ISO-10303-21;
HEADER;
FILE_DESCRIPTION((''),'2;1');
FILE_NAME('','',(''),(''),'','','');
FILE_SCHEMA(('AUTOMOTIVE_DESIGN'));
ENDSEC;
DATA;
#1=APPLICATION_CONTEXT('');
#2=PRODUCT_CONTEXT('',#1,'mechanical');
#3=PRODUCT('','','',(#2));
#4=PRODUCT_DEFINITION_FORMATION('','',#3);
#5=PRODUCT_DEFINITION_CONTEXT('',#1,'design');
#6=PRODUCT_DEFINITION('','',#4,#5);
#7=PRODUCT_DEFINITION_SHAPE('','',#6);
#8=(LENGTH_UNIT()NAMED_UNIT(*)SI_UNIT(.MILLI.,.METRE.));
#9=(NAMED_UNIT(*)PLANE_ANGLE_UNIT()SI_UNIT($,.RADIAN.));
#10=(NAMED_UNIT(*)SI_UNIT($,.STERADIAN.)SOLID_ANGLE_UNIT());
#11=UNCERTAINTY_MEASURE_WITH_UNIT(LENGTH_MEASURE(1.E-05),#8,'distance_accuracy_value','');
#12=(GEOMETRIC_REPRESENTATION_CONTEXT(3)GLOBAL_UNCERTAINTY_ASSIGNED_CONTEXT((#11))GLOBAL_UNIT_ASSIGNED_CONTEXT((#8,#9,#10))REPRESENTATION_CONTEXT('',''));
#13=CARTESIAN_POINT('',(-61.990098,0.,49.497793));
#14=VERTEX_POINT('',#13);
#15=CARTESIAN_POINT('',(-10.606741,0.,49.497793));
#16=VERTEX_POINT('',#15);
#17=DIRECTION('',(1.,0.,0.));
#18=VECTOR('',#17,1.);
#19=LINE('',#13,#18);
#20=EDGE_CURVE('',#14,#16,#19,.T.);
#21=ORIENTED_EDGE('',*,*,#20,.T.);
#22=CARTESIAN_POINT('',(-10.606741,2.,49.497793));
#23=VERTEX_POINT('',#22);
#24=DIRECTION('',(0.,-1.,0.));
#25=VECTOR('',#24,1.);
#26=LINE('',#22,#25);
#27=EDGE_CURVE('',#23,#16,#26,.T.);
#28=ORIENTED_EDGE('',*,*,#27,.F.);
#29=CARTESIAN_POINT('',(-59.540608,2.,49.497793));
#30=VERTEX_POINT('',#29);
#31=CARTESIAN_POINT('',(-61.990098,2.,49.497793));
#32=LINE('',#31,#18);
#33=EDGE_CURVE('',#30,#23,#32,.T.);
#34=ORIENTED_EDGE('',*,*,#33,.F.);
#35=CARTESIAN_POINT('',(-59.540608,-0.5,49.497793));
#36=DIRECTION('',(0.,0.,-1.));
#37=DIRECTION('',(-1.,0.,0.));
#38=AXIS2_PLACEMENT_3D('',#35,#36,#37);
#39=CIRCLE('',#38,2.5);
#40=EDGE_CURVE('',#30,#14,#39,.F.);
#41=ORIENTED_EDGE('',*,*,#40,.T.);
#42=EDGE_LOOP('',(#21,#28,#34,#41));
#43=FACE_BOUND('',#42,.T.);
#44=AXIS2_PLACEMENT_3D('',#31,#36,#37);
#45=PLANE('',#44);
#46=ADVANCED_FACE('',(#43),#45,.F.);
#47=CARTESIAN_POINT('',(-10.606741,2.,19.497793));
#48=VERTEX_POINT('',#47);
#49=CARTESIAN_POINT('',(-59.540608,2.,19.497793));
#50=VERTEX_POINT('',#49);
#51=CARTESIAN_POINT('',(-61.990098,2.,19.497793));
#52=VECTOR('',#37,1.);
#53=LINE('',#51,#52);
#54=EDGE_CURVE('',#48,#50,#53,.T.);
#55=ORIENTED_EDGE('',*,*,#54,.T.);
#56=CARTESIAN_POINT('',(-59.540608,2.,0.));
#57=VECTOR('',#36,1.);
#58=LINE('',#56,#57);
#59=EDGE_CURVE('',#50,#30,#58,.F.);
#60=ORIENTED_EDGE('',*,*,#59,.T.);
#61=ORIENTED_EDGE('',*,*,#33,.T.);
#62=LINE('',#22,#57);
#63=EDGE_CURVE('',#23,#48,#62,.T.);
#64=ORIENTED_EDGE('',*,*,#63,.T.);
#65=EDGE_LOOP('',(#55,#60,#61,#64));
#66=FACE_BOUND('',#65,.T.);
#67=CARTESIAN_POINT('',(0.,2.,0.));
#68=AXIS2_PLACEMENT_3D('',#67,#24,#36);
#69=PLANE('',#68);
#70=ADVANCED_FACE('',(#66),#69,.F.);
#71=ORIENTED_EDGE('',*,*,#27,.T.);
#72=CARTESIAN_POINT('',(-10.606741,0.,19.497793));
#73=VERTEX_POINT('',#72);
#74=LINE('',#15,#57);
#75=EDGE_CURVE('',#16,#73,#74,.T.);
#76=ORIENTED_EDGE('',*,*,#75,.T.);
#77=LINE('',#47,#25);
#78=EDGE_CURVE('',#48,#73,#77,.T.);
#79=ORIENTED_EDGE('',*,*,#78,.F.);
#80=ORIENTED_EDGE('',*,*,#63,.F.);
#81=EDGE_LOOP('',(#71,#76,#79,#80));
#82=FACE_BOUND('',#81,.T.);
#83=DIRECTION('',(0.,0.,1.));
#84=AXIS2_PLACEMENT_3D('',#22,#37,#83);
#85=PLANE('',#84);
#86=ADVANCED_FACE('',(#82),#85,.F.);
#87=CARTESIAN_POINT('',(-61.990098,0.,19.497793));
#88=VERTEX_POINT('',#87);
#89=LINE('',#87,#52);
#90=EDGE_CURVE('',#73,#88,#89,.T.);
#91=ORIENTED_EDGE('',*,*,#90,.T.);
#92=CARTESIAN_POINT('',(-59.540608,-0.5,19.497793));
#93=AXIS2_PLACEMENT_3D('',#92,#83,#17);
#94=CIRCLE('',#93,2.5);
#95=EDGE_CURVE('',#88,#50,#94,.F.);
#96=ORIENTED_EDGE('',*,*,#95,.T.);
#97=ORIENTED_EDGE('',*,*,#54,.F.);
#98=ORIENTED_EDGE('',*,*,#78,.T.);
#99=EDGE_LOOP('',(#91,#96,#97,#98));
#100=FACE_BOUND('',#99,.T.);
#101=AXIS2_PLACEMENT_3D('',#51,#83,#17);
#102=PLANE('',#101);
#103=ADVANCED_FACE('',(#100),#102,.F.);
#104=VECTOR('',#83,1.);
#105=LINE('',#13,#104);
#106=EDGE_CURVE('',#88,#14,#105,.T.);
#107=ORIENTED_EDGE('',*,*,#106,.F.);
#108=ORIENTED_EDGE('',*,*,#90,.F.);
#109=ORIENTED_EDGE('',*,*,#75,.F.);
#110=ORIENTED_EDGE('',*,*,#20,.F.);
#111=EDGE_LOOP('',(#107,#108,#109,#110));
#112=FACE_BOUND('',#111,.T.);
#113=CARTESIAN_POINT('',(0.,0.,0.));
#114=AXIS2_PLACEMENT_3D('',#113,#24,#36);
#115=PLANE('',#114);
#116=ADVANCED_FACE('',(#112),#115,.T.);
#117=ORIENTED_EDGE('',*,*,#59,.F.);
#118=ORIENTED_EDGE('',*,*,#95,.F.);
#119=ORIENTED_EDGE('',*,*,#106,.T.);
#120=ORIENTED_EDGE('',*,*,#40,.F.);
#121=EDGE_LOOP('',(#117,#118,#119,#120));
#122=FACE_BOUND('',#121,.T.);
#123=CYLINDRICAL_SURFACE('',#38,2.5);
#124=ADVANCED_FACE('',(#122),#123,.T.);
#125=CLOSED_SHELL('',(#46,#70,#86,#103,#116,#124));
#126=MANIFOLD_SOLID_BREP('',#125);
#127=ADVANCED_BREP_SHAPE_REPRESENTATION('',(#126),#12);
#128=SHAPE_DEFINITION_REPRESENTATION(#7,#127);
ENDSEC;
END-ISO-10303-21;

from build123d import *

# Parameters (mm, degrees)
SKETCH_1_W      = 51.383356777
SKETCH_1_H      = 30
EXTRUDE_1_DEPTH = 2
FILLET_1_R      = 2.5


with BuildPart() as part:
    # Эскиз1 → Бобышка-Вытянуть1 (new body)
    with BuildSketch(Plane(origin=(0, 0, 0), x_dir=(1, 0, 0), z_dir=(0, 1, 0))):
        with Locations((-36.298419233, -34.497792834)):
            Rectangle(SKETCH_1_W, SKETCH_1_H)
    extrude(amount=EXTRUDE_1_DEPTH)

    # Скругление1
    # the kernel refuses this fillet: 2.5 mm, written as the material it takes off along each edge
    with BuildSketch(Plane(origin=(-61.990097621, 2, 13.374068477), x_dir=(1.5667467323505199e-12, -1.0, 0), z_dir=(0, 0, 1))) as fillet_1_piece_1:
        with BuildLine():
            CenterArc((2.5, 2.449489743), FILLET_1_R, 180, 78.463040967)
            Line((0, 2.449489743), (-0.05, 2.449489743))
            Line((-0.05, 2.449489743), (-0.05, 0))
            Line((-0.05, 0), (0, -0.05))
            ThreePointArc((0, -0.05), (1, -0.05), (1.99, -0.048989795))
            Line((1.99, -0.048989795), (2, 0))
        make_face()
    extrude(amount=42.247448714, mode=Mode.SUBTRACT)


solid = part.part
